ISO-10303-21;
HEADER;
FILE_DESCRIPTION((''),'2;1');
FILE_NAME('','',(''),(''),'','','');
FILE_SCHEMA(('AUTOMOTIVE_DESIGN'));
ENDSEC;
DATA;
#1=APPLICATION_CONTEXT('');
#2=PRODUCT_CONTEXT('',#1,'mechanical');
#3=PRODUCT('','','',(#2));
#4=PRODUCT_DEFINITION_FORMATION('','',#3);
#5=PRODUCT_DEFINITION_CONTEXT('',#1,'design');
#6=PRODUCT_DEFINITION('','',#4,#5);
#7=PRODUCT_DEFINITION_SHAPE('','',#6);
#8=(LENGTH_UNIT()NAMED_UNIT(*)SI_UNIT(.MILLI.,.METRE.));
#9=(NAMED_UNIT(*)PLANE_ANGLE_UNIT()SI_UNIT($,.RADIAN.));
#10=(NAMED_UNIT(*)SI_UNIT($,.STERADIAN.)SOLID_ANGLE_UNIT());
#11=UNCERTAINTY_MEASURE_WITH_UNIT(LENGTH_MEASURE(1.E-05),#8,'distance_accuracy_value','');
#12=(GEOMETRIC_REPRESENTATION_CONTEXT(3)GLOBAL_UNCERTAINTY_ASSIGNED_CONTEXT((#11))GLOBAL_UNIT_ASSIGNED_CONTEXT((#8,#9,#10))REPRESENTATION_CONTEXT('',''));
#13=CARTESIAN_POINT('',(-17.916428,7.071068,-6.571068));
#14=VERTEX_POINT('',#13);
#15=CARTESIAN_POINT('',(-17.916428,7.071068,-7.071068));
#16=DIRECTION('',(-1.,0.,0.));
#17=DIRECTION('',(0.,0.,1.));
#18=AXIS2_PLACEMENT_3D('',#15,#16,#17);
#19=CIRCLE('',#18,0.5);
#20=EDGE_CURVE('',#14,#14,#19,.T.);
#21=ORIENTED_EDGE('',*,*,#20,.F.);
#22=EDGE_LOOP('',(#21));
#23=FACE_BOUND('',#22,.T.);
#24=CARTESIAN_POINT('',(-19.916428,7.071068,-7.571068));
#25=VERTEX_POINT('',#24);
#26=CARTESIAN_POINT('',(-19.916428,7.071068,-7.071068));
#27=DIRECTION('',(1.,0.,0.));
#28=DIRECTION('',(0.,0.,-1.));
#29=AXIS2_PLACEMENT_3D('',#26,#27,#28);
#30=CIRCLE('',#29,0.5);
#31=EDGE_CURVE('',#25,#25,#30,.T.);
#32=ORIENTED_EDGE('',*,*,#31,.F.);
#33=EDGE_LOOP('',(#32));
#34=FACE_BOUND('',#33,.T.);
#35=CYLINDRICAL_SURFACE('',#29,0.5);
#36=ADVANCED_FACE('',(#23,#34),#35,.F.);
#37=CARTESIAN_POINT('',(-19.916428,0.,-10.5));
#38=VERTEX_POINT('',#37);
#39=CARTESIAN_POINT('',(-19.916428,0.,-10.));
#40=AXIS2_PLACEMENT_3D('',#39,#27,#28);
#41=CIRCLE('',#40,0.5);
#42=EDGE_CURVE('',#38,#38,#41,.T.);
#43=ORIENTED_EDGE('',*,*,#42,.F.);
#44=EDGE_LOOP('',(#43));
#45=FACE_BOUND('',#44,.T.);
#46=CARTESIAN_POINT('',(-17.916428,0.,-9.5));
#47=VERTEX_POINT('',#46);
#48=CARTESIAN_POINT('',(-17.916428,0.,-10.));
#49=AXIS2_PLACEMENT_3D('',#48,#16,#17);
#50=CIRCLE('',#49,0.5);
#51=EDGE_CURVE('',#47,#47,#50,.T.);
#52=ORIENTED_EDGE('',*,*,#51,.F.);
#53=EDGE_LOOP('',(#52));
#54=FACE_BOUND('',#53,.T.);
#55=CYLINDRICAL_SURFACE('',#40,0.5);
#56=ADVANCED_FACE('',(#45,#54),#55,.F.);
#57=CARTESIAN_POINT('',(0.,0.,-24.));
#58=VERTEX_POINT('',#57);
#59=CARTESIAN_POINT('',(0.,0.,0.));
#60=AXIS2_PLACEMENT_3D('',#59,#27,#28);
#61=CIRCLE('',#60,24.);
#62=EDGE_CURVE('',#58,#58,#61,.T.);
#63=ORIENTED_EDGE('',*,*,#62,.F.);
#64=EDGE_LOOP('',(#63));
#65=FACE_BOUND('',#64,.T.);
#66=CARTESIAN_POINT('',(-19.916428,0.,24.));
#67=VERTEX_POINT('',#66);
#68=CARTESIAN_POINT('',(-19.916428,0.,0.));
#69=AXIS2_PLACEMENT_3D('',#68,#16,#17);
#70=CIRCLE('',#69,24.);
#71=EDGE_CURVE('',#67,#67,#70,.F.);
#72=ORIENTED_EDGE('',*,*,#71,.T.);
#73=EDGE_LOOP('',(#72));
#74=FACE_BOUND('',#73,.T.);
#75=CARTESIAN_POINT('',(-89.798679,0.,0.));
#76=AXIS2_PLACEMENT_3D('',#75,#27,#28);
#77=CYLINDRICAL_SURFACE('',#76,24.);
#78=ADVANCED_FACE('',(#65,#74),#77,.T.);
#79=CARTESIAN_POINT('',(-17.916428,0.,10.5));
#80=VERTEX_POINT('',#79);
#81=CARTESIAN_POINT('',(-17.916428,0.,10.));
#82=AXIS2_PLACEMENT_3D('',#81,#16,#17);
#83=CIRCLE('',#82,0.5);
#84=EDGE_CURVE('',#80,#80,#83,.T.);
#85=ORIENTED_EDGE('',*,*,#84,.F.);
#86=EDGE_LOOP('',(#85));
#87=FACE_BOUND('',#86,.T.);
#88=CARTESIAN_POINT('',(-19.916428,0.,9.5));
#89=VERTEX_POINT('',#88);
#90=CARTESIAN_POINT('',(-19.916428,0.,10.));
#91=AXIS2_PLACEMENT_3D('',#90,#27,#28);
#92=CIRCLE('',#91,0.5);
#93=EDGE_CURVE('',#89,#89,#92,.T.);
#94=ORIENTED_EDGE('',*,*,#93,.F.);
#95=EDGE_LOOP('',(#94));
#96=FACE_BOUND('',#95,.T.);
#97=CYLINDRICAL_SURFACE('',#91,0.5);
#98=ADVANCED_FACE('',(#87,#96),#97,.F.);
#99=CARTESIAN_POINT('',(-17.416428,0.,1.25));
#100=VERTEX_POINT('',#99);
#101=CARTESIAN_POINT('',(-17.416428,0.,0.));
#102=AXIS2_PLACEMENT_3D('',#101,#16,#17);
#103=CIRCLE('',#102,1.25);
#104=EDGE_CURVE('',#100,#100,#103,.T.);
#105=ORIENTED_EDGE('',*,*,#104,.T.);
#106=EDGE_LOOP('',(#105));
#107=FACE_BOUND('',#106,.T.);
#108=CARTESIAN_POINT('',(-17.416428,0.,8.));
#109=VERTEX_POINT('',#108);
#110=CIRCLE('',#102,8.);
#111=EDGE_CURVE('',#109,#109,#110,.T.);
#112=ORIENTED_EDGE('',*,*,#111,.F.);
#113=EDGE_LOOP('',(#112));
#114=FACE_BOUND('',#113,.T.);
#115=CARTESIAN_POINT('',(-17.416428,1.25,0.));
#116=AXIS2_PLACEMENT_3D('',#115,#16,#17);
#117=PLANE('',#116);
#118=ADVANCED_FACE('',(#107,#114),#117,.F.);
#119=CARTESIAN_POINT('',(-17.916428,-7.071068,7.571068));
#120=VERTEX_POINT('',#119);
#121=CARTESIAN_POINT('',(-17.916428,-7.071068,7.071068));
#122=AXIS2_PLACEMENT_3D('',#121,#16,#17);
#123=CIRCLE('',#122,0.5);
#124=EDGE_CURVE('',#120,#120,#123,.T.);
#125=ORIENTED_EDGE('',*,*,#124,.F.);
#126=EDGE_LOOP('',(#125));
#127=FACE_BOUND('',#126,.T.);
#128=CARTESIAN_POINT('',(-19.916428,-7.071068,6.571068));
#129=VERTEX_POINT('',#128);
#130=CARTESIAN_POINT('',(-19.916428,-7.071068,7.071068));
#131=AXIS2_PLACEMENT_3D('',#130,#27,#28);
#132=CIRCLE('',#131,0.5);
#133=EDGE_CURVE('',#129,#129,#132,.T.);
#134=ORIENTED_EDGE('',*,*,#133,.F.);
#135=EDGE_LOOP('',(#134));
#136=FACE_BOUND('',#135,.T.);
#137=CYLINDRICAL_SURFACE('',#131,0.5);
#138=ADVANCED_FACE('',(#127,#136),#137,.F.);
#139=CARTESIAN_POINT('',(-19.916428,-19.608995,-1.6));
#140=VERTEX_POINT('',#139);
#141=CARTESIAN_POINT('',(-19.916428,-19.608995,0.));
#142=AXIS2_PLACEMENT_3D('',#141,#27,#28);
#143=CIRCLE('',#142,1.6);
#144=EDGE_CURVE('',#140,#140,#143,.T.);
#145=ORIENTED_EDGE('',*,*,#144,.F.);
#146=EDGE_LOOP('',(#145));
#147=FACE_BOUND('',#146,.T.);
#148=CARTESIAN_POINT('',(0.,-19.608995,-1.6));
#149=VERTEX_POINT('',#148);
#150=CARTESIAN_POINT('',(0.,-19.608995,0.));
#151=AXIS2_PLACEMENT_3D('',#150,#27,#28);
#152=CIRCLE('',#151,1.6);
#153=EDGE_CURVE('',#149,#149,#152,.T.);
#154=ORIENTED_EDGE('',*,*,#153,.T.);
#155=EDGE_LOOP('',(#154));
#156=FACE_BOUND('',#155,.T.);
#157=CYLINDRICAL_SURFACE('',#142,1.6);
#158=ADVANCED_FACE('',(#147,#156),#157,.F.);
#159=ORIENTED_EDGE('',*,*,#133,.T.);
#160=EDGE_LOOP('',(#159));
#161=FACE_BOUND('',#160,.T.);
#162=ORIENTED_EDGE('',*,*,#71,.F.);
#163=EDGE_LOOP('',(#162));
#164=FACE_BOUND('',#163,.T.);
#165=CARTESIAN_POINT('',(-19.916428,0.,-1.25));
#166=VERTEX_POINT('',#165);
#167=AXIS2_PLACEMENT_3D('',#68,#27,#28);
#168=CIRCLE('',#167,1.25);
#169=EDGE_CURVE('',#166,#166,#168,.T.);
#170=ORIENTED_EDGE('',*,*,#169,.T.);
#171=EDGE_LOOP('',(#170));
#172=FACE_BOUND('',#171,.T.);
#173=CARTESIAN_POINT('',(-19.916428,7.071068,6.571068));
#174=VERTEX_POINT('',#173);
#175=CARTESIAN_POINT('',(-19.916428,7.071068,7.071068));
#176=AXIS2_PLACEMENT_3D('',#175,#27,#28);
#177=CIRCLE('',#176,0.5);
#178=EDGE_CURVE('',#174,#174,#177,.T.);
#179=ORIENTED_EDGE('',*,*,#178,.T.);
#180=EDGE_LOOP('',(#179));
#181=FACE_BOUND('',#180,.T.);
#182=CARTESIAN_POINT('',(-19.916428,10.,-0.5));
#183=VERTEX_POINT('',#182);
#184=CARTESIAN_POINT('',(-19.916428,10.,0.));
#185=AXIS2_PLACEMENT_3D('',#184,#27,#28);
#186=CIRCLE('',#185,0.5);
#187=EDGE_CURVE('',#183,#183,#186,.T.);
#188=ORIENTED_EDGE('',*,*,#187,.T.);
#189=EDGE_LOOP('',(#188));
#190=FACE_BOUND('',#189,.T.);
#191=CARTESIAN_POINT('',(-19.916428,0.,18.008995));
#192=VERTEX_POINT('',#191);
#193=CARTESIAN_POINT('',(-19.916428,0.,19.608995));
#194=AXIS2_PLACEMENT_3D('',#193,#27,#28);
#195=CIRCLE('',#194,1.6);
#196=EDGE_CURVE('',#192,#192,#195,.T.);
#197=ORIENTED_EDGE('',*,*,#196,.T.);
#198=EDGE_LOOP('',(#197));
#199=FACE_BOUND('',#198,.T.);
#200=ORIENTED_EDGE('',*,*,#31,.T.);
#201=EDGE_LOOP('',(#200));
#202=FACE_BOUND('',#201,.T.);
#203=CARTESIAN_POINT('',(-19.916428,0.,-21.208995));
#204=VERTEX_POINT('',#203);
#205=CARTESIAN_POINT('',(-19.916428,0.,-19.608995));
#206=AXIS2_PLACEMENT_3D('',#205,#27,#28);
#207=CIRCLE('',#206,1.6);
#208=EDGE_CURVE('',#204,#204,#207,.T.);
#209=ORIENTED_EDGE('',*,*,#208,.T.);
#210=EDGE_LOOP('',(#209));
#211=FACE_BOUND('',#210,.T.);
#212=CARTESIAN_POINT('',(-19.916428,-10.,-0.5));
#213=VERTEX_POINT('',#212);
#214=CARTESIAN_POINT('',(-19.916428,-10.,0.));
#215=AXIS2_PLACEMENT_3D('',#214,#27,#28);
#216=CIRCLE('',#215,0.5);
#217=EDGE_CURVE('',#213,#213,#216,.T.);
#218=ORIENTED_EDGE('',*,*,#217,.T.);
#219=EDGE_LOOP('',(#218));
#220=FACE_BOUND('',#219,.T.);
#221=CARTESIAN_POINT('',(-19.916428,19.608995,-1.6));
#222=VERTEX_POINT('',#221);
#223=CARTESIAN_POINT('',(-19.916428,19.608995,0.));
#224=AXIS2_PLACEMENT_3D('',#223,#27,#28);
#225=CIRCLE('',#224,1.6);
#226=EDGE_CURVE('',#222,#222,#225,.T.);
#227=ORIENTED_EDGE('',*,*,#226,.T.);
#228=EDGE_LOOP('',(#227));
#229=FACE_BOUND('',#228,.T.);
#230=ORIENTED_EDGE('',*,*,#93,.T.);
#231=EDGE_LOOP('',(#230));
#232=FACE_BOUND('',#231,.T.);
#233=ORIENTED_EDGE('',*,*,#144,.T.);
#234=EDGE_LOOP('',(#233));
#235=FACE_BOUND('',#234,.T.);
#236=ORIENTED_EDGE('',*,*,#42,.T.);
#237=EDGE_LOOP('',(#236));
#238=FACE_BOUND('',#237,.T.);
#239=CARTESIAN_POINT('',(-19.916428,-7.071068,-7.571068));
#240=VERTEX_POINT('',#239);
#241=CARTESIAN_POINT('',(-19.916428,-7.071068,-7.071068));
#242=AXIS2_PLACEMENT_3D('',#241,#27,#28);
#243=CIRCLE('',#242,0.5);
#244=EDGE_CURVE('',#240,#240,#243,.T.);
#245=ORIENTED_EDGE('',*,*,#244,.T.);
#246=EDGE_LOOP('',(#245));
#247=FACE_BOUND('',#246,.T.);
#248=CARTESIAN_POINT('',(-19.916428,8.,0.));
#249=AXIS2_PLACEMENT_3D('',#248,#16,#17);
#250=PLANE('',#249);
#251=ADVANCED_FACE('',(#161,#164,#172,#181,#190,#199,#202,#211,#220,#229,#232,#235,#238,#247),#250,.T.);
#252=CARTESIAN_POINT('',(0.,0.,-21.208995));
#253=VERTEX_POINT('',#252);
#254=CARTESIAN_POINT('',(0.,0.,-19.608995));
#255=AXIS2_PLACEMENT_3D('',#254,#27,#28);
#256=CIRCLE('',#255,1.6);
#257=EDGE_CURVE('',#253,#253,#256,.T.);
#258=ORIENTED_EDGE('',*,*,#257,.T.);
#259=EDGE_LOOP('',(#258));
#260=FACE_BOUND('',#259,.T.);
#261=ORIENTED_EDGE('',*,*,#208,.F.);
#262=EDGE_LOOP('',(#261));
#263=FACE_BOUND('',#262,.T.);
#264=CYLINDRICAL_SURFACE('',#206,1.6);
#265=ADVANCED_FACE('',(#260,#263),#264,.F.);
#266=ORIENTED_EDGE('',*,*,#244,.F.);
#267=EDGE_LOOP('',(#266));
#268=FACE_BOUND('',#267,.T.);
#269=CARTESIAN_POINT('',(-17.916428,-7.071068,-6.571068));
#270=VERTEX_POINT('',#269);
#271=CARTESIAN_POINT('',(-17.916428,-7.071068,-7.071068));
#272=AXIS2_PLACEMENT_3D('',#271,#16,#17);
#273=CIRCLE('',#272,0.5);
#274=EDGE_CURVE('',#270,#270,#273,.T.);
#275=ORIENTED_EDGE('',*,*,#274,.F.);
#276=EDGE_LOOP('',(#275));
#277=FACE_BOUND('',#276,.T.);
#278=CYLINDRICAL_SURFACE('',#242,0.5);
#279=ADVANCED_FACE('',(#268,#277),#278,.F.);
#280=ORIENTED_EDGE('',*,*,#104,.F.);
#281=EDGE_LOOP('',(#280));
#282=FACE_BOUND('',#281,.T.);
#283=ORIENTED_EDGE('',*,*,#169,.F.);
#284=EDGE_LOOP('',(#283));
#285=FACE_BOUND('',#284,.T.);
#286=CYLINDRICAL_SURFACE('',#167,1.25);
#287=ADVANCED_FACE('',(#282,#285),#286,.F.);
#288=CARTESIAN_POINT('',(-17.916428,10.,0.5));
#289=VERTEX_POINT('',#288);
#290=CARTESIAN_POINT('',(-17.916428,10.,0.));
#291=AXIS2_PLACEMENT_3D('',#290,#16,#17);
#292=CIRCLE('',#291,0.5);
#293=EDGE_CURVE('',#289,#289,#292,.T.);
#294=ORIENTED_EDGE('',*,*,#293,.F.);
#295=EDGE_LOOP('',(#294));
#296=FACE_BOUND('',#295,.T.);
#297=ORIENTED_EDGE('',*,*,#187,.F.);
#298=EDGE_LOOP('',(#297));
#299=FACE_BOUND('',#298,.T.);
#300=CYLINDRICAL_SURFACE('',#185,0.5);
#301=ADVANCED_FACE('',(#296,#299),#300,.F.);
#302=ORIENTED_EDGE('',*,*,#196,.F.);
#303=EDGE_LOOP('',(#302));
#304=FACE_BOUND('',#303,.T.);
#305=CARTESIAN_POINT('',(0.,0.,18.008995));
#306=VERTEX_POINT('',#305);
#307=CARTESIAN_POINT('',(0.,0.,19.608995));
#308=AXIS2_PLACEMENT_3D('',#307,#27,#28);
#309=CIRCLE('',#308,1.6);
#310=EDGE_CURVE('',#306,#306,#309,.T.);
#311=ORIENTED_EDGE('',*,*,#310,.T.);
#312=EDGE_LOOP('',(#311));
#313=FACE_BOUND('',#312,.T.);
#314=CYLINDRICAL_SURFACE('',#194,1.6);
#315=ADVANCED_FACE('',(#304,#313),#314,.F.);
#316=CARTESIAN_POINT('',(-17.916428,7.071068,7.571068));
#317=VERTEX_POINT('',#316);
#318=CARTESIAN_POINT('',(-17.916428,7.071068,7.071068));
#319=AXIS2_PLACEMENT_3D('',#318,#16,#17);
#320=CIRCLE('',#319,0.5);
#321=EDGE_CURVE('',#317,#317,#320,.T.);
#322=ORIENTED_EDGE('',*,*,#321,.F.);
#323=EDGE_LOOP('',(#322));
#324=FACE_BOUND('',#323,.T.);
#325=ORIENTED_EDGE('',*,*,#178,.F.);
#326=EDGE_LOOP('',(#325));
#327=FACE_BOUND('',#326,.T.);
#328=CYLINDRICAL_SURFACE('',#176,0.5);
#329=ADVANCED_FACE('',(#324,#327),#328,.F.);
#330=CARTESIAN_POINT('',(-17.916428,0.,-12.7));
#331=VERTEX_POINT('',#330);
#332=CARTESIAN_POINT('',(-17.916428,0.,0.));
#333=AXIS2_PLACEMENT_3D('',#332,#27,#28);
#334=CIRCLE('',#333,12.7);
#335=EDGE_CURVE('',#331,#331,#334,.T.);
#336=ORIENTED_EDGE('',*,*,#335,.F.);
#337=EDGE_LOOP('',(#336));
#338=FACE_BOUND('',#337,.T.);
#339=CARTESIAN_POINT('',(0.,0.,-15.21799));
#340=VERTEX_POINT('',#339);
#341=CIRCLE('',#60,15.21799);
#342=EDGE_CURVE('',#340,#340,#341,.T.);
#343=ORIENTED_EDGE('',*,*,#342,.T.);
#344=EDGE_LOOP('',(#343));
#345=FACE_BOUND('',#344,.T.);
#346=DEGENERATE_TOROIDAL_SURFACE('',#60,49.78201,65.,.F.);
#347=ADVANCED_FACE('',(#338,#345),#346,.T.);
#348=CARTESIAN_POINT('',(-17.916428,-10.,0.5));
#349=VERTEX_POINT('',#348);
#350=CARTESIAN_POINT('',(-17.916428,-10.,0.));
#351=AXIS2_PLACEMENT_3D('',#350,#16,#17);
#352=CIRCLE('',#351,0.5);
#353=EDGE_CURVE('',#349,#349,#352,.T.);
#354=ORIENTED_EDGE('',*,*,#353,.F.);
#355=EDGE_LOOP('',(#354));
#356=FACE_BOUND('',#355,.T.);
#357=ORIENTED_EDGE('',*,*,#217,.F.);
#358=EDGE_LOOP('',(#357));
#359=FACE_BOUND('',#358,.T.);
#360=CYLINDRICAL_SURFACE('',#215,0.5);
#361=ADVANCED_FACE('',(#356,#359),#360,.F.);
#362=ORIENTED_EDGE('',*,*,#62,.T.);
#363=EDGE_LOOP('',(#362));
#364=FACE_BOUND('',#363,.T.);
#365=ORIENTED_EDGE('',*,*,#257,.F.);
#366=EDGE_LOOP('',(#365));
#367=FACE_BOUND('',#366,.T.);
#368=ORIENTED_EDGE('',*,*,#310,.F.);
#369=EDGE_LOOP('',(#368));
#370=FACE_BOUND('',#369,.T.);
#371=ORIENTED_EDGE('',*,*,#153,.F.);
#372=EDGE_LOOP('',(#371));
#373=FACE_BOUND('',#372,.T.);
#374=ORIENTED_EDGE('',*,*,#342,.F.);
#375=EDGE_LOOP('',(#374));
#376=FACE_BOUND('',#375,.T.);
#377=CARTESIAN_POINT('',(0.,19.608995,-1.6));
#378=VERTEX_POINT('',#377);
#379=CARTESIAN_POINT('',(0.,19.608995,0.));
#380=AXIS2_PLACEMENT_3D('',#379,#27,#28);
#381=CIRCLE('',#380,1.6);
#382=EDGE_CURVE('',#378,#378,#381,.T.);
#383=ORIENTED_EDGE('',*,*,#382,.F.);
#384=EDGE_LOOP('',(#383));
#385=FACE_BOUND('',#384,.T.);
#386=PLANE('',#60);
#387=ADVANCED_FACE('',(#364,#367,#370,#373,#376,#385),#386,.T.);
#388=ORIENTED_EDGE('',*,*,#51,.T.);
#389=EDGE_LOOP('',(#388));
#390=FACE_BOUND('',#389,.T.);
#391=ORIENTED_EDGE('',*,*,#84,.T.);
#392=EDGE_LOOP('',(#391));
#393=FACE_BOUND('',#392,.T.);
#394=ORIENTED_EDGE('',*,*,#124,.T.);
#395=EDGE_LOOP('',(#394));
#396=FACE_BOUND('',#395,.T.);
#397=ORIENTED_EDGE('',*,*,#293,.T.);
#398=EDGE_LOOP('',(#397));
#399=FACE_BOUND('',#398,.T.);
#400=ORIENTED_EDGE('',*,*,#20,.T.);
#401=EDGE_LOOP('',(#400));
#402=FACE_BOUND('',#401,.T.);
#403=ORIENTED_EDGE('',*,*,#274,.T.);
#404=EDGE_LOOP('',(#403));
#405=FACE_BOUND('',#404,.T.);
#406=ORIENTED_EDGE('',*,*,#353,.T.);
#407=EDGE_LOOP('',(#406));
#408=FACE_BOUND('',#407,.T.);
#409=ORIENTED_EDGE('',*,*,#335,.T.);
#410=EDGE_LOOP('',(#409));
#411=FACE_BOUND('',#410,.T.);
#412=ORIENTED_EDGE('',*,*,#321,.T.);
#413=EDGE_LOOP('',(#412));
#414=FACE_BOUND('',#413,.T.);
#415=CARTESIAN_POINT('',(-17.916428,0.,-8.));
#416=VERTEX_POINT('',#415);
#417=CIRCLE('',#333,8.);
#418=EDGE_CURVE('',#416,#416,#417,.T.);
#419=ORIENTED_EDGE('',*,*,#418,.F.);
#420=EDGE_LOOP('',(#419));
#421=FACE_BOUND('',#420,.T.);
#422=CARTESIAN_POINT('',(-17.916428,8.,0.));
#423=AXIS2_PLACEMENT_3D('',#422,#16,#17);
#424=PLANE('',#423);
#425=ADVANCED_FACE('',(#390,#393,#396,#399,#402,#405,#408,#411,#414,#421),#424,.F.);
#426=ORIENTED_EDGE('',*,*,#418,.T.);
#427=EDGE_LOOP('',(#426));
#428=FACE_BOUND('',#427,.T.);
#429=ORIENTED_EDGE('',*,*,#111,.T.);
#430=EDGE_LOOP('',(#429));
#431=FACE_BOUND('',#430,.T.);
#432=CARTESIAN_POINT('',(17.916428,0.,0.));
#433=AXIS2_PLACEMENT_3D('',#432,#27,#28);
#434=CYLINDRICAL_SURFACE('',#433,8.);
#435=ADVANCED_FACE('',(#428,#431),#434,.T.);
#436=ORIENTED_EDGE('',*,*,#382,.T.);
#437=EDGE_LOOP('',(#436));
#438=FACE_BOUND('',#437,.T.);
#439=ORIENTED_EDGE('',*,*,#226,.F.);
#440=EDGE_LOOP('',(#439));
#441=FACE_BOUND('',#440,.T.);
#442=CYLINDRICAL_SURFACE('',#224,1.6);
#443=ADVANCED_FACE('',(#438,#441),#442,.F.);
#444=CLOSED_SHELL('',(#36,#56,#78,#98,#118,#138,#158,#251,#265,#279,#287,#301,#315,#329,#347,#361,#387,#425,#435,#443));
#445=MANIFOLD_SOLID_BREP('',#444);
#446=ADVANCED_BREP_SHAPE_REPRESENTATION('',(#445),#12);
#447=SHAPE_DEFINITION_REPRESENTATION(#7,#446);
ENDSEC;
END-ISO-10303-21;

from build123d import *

# Parameters (mm, degrees)
SKETCH2_R           = 24
BOSS_EXTRUDE1_DEPTH = 19.916428128
SKETCH3_R           = 1.25
CUT_EXTRUDE1_DEPTH  = 40.353070007
SKETCH4_R           = 1.6
CUT_EXTRUDE2_DEPTH  = 40.353070007
SKETCH5_R           = 0.5
CUT_EXTRUDE3_DEPTH  = 39.148813636


# Read off the part's stored shape, not the designer's step: Roller coating 12, Roller core 12 coated
with BuildPart() as part:
    # Roller coating 12 outline → Roller coating 12 (revolve)
    with BuildSketch(Plane.YX):
        with BuildLine():
            ThreePointArc((12.7, -17.916428128), (15.217989764, 0), (12.7, 17.916428128))
            Line((12.7, 17.916428128), (8, 17.916428128))
            Line((8, 17.916428128), (8, 17.416428128))
            Line((8, 17.416428128), (12.322080058, 17.416428128))
            ThreePointArc((12.322080058, 17.416428128), (14.717989764, 0), (12.322080058, -17.416428128))
            Line((12.322080058, -17.416428128), (8, -17.416428128))
            Line((8, -17.416428128), (8, -17.916428128))
            Line((8, -17.916428128), (12.7, -17.916428128))
        make_face()
    revolve(axis=Axis((0, 0, 0), (1, 0, 0)))


with BuildPart() as body_2:
    # Roller core 12 coated outline → Roller core 12 coated (revolve)
    with BuildSketch(Plane.YX):
        with BuildLine():
            Line((1.25, 17.416428128), (1.25, -17.416428128))
            Line((1.25, -17.416428128), (12.322080058, -17.416428128))
            ThreePointArc((12.322080058, -17.416428128), (14.717989764, 0), (12.322080058, 17.416428128))
            Line((12.322080058, 17.416428128), (1.25, 17.416428128))
        make_face()
    revolve(axis=Axis((0, 0, 0), (1, 0, 0)))


with BuildPart() as part_1:
    add(part.part)

    # Combine1: union body 2
    add(body_2.part)


with BuildPart() as body_2_2:
    # Sketch2 → Boss-Extrude1 (new body)
    with BuildSketch(Plane(origin=(0, 0, 0), x_dir=(0, 0, -1), z_dir=(1, 0, 0))):
        Circle(SKETCH2_R)
    extrude(amount=-BOSS_EXTRUDE1_DEPTH)

    # Combine2: cut part
    add(part_1.part, mode=Mode.SUBTRACT)

    # Sketch3 → Cut-Extrude1 (cut, through all)
    with BuildSketch(Plane(origin=(0, 0, 0), x_dir=(0, 0, -1), z_dir=(1, 0, 0))):
        Circle(SKETCH3_R)
    extrude(amount=-CUT_EXTRUDE1_DEPTH, mode=Mode.SUBTRACT)

    # Sketch4 → Cut-Extrude2 (cut, through all)
    with BuildSketch(Plane(origin=(0, 0, 0), x_dir=(0, 0, -1), z_dir=(1, 0, 0))):
        with Locations((0, 19.608994882)):
            Circle(SKETCH4_R)
        with Locations((-19.608994882, 0)):
            Circle(SKETCH4_R)
        with Locations((0, -19.608994882)):
            Circle(SKETCH4_R)
        with Locations((19.608994882, 0)):
            Circle(SKETCH4_R)
    extrude(amount=-CUT_EXTRUDE2_DEPTH, mode=Mode.SUBTRACT)

    # Sketch5 → Cut-Extrude3 (cut, through all)
    with BuildSketch(Plane(origin=(-17.416428128, 0, 0), x_dir=(0, 0, -1), z_dir=(1, 0, 0))):
        with Locations((-7.071067812, 7.071067812)):
            Circle(SKETCH5_R)
        with Locations((0, 10)):
            Circle(SKETCH5_R)
        with Locations((-10, 0)):
            Circle(SKETCH5_R)
        with Locations((0, -10)):
            Circle(SKETCH5_R)
        with Locations((10, 0)):
            Circle(SKETCH5_R)
        with Locations((7.071067812, 7.071067812)):
            Circle(SKETCH5_R)
        with Locations((-7.071067812, -7.071067812)):
            Circle(SKETCH5_R)
        with Locations((7.071067812, -7.071067812)):
            Circle(SKETCH5_R)
    extrude(amount=-CUT_EXTRUDE3_DEPTH, mode=Mode.SUBTRACT)


solid = body_2_2.part
